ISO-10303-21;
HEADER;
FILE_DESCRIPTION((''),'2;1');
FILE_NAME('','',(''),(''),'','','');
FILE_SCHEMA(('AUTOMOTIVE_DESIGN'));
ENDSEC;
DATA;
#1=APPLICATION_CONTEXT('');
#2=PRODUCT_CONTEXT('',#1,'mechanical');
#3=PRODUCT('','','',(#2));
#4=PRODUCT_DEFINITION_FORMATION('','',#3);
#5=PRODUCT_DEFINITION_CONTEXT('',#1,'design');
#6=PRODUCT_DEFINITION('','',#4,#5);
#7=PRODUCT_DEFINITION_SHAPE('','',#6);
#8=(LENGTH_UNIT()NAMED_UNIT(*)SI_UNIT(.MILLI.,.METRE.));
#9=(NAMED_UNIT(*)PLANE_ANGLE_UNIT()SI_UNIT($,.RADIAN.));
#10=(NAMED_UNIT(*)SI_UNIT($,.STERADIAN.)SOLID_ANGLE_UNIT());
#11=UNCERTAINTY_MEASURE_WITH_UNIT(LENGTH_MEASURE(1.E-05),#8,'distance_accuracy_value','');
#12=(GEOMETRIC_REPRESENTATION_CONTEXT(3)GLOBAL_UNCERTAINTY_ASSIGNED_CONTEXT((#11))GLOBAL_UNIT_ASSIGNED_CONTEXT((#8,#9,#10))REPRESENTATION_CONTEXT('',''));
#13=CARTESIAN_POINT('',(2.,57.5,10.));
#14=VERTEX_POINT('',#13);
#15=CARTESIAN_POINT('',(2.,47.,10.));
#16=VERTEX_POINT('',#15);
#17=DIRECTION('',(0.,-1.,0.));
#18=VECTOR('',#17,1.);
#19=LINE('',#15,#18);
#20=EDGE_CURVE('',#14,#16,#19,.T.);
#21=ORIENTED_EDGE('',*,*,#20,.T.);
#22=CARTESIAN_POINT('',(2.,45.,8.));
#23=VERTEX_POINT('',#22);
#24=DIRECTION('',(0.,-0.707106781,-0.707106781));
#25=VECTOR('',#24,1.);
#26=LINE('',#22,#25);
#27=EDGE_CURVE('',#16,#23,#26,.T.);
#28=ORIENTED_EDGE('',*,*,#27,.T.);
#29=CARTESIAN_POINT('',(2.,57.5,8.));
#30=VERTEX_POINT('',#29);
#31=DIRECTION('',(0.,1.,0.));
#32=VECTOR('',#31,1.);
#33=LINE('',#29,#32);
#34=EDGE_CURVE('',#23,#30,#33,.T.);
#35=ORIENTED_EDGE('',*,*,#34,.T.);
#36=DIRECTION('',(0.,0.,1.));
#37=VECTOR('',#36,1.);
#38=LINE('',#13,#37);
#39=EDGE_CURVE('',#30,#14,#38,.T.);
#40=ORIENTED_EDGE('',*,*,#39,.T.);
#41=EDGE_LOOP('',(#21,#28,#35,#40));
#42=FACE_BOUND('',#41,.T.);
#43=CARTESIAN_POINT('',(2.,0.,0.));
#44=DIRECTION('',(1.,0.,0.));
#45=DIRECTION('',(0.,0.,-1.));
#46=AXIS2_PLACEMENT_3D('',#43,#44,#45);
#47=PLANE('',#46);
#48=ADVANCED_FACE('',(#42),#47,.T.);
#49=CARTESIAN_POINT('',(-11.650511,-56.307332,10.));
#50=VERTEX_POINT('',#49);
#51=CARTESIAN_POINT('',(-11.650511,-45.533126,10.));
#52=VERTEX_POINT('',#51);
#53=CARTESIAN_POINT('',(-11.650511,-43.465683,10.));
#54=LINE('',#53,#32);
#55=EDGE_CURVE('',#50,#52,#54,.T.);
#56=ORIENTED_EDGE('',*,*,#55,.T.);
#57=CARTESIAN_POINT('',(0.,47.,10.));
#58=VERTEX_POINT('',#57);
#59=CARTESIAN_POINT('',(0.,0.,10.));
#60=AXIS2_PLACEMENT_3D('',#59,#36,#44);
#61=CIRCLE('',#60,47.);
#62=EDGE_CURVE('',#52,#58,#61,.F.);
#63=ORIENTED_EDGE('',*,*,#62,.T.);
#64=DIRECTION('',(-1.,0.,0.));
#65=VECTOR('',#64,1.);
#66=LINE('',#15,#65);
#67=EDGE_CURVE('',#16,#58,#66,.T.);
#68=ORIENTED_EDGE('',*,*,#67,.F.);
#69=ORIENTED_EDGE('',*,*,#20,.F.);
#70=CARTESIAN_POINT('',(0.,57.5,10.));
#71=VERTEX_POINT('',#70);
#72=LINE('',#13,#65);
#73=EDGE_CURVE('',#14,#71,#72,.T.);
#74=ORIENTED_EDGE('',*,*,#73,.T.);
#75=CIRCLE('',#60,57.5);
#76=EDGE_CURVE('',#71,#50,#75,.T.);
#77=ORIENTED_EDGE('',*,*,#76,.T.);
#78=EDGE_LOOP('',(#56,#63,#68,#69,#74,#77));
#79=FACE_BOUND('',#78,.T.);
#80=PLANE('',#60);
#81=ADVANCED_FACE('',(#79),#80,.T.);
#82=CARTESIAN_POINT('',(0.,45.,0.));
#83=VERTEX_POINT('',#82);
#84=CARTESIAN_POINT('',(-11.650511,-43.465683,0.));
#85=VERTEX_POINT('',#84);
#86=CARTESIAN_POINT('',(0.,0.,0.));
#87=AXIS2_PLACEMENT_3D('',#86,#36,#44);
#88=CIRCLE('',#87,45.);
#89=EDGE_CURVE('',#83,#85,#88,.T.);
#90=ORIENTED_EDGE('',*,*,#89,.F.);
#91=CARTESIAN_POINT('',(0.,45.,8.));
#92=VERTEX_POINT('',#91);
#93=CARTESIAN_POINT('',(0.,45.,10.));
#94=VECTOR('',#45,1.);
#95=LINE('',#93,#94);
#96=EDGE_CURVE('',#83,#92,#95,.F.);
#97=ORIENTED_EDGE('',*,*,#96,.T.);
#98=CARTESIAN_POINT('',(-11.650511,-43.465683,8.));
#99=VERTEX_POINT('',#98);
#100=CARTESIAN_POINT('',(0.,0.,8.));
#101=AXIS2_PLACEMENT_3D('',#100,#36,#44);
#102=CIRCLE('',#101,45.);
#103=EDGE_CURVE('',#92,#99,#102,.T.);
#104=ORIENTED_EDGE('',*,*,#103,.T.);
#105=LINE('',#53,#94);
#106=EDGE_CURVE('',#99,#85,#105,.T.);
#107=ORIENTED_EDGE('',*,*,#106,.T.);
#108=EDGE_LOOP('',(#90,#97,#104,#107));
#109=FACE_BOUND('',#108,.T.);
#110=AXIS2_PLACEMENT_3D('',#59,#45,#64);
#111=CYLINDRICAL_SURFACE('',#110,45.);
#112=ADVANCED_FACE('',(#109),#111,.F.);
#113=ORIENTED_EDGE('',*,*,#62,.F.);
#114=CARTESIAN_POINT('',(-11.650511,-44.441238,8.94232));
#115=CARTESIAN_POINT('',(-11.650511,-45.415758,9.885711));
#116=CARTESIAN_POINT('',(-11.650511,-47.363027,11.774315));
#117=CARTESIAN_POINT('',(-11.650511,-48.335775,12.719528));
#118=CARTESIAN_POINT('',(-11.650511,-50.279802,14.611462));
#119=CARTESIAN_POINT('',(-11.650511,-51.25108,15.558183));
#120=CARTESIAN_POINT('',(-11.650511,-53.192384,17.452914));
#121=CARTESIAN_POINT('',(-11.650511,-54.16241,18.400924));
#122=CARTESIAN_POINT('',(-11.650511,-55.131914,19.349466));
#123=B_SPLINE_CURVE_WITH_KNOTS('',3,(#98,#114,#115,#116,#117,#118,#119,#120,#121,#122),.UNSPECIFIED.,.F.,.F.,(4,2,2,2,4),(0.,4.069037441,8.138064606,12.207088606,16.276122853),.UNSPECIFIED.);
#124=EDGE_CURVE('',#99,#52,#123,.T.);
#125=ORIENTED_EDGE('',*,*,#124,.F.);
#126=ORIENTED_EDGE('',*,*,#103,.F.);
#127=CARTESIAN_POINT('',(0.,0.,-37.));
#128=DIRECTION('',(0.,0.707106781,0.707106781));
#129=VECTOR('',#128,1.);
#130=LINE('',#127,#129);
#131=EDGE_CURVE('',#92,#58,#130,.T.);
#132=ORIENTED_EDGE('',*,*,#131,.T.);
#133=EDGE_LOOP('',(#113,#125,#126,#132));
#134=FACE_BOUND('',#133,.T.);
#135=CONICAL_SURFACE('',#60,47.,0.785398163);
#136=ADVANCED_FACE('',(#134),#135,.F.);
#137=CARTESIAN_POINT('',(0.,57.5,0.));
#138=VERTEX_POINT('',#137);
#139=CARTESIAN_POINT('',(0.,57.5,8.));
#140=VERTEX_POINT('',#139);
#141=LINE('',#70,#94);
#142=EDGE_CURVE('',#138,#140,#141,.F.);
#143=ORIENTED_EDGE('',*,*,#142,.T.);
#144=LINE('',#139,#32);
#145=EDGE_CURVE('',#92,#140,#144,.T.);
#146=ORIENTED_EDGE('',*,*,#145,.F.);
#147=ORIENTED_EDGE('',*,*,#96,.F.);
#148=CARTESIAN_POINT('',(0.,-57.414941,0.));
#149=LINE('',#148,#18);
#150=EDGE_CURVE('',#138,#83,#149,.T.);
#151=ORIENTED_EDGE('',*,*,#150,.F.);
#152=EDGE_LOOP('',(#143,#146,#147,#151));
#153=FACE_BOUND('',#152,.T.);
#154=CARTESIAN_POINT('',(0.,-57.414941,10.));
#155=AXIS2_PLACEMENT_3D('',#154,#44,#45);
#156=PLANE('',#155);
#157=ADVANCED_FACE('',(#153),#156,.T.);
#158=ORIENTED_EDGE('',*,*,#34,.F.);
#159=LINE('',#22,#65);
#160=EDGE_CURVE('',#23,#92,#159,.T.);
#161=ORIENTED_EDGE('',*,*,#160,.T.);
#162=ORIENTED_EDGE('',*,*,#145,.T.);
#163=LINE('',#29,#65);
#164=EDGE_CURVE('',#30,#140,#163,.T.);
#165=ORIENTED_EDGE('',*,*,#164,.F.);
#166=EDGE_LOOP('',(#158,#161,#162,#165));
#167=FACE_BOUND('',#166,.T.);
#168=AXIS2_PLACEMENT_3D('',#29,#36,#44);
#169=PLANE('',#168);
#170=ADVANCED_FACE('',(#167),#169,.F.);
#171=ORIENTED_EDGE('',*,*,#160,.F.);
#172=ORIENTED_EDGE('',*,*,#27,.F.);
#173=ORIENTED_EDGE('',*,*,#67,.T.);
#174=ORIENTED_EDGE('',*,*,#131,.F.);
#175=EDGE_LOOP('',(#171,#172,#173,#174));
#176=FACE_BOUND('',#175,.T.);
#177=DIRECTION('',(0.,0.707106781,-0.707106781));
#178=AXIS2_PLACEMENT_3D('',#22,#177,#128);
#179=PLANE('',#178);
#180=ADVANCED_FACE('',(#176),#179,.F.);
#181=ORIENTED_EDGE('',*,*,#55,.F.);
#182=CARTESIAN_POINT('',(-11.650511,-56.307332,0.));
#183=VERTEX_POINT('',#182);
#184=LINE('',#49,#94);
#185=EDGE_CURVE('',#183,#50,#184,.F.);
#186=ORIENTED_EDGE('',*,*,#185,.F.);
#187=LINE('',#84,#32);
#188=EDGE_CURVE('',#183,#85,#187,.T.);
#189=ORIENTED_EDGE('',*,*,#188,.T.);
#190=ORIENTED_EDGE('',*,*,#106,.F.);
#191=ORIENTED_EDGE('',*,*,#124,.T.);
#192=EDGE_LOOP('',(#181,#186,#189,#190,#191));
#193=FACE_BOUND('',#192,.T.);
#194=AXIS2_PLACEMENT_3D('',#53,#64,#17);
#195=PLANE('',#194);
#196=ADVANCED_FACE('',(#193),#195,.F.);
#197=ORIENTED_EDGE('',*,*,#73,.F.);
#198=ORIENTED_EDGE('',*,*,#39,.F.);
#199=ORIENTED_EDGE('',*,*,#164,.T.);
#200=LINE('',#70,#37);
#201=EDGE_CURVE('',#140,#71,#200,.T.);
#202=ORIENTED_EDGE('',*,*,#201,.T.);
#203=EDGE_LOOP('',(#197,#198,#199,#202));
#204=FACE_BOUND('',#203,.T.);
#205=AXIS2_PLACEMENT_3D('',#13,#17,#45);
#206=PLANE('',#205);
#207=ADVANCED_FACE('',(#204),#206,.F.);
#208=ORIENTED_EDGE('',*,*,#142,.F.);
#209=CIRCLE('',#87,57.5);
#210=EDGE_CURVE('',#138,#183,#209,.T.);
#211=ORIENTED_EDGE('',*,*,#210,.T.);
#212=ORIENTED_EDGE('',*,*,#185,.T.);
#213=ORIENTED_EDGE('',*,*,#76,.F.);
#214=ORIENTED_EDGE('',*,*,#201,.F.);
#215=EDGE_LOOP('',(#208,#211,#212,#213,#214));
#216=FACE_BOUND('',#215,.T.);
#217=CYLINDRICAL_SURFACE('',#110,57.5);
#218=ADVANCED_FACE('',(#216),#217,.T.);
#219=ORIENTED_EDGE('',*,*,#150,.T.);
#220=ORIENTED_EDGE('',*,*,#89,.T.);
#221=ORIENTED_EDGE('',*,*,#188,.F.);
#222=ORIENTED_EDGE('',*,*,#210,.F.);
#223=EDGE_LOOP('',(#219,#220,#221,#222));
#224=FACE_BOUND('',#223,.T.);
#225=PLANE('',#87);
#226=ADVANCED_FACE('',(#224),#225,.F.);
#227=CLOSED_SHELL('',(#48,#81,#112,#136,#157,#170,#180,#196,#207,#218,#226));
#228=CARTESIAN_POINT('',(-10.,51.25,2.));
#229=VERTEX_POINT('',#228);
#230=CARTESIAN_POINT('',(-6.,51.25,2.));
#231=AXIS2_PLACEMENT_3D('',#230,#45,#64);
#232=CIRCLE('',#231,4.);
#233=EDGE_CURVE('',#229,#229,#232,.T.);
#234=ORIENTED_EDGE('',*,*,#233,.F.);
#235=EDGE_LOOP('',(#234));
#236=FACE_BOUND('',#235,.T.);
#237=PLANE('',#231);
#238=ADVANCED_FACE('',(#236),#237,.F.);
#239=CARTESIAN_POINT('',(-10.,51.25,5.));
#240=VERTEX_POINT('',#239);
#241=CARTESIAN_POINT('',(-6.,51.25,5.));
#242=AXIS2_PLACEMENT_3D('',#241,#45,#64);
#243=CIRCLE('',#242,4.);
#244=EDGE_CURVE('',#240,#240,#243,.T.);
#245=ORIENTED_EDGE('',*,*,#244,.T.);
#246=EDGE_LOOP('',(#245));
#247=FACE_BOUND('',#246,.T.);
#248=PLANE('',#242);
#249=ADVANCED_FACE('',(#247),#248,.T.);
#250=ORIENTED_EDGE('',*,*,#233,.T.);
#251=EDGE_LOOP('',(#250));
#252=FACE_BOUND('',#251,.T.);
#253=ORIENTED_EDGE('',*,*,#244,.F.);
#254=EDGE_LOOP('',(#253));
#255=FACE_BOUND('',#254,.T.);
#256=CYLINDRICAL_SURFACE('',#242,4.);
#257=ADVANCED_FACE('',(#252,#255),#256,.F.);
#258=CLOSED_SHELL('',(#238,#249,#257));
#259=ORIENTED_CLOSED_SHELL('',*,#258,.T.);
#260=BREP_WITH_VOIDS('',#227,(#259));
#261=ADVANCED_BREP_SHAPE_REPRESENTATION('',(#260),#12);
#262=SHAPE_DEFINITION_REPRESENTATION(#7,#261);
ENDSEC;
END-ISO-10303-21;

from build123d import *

# Parameters (mm, degrees)
SKETCH1_R           = 57.5
SKETCH1_R_2         = 45
BOSS_EXTRUDE1_DEPTH = 10
CUT_EXTRUDE2_DEPTH  = 10
CHAMFER1_SIZE       = 2
SKETCH3_W           = 124.113144638
SKETCH3_H           = 66.876500266
CUT_EXTRUDE3_DEPTH  = 10
CUT_EXTRUDE4_START  = -2
SKETCH5_R           = 4
CUT_EXTRUDE4_DEPTH  = 3
BOSS_EXTRUDE2_DEPTH = 2


with BuildPart() as part:
    # Sketch1 → Boss-Extrude1 (new body)
    with BuildSketch(Plane(origin=(0, 0, 0), x_dir=(0, 1, 0), z_dir=(0, 0, 1))):
        Circle(SKETCH1_R)
        Circle(SKETCH1_R_2, mode=Mode.SUBTRACT)
    extrude(amount=BOSS_EXTRUDE1_DEPTH)

    # Sketch2 → Cut-Extrude2 (cut)
    with BuildSketch(Plane(origin=(0, 0, 0), x_dir=(1, 0, 0), z_dir=(0, 0, -1))):
        with BuildLine():
            Line((11.650511373, 56.659857386), (11.650511373, 43.46568284))
            add(Edge.make_bspline(
                [(11.650511373, 43.46568284), (-0.679246558, 46.406413024), (-11.650511373, 43.46568284)],
                knots=[0, 0, 0, 0.575547458, 0.575547458, 0.575547458], degree=2))
            Line((-11.650511373, 43.46568284), (-11.650511373, 56.659857386))
            ThreePointArc((-11.650511373, 56.659857386), (0, 57.845257837), (11.650511373, 56.659857386))
        make_face()
    extrude(amount=-CUT_EXTRUDE2_DEPTH, mode=Mode.SUBTRACT)

    # Chamfer1
    chamfer1_edges = [part.edges().sort_by_distance(p)[0] for p in [
        (0, 45, 10),
    ]]
    chamfer(chamfer1_edges, length=CHAMFER1_SIZE)

    # Sketch3 → Cut-Extrude3 (cut)
    with BuildSketch(Plane(origin=(0, 0, 0), x_dir=(0, 1, 0), z_dir=(0, 0, 1))):
        with Locations((4.641630902, -33.438250133)):
            Rectangle(SKETCH3_W, SKETCH3_H)
    extrude(amount=CUT_EXTRUDE3_DEPTH, mode=Mode.SUBTRACT)

    # Sketch5 → Cut-Extrude4 (cut)
    with BuildSketch(Plane(origin=(0, 0, 0), x_dir=(1, 0, 0), z_dir=(0, 0, -1)).offset(CUT_EXTRUDE4_START)):
        with Locations((-6, -51.25)):
            Circle(SKETCH5_R)
    extrude(amount=-CUT_EXTRUDE4_DEPTH, mode=Mode.SUBTRACT)

    # Sketch6 → Boss-Extrude2 (add)
    with BuildSketch(Plane.YZ):
        Polygon((45, 8), (47, 10), (57.5, 10), (57.5, 8), align=None)
    extrude(amount=BOSS_EXTRUDE2_DEPTH)


solid = part.part
